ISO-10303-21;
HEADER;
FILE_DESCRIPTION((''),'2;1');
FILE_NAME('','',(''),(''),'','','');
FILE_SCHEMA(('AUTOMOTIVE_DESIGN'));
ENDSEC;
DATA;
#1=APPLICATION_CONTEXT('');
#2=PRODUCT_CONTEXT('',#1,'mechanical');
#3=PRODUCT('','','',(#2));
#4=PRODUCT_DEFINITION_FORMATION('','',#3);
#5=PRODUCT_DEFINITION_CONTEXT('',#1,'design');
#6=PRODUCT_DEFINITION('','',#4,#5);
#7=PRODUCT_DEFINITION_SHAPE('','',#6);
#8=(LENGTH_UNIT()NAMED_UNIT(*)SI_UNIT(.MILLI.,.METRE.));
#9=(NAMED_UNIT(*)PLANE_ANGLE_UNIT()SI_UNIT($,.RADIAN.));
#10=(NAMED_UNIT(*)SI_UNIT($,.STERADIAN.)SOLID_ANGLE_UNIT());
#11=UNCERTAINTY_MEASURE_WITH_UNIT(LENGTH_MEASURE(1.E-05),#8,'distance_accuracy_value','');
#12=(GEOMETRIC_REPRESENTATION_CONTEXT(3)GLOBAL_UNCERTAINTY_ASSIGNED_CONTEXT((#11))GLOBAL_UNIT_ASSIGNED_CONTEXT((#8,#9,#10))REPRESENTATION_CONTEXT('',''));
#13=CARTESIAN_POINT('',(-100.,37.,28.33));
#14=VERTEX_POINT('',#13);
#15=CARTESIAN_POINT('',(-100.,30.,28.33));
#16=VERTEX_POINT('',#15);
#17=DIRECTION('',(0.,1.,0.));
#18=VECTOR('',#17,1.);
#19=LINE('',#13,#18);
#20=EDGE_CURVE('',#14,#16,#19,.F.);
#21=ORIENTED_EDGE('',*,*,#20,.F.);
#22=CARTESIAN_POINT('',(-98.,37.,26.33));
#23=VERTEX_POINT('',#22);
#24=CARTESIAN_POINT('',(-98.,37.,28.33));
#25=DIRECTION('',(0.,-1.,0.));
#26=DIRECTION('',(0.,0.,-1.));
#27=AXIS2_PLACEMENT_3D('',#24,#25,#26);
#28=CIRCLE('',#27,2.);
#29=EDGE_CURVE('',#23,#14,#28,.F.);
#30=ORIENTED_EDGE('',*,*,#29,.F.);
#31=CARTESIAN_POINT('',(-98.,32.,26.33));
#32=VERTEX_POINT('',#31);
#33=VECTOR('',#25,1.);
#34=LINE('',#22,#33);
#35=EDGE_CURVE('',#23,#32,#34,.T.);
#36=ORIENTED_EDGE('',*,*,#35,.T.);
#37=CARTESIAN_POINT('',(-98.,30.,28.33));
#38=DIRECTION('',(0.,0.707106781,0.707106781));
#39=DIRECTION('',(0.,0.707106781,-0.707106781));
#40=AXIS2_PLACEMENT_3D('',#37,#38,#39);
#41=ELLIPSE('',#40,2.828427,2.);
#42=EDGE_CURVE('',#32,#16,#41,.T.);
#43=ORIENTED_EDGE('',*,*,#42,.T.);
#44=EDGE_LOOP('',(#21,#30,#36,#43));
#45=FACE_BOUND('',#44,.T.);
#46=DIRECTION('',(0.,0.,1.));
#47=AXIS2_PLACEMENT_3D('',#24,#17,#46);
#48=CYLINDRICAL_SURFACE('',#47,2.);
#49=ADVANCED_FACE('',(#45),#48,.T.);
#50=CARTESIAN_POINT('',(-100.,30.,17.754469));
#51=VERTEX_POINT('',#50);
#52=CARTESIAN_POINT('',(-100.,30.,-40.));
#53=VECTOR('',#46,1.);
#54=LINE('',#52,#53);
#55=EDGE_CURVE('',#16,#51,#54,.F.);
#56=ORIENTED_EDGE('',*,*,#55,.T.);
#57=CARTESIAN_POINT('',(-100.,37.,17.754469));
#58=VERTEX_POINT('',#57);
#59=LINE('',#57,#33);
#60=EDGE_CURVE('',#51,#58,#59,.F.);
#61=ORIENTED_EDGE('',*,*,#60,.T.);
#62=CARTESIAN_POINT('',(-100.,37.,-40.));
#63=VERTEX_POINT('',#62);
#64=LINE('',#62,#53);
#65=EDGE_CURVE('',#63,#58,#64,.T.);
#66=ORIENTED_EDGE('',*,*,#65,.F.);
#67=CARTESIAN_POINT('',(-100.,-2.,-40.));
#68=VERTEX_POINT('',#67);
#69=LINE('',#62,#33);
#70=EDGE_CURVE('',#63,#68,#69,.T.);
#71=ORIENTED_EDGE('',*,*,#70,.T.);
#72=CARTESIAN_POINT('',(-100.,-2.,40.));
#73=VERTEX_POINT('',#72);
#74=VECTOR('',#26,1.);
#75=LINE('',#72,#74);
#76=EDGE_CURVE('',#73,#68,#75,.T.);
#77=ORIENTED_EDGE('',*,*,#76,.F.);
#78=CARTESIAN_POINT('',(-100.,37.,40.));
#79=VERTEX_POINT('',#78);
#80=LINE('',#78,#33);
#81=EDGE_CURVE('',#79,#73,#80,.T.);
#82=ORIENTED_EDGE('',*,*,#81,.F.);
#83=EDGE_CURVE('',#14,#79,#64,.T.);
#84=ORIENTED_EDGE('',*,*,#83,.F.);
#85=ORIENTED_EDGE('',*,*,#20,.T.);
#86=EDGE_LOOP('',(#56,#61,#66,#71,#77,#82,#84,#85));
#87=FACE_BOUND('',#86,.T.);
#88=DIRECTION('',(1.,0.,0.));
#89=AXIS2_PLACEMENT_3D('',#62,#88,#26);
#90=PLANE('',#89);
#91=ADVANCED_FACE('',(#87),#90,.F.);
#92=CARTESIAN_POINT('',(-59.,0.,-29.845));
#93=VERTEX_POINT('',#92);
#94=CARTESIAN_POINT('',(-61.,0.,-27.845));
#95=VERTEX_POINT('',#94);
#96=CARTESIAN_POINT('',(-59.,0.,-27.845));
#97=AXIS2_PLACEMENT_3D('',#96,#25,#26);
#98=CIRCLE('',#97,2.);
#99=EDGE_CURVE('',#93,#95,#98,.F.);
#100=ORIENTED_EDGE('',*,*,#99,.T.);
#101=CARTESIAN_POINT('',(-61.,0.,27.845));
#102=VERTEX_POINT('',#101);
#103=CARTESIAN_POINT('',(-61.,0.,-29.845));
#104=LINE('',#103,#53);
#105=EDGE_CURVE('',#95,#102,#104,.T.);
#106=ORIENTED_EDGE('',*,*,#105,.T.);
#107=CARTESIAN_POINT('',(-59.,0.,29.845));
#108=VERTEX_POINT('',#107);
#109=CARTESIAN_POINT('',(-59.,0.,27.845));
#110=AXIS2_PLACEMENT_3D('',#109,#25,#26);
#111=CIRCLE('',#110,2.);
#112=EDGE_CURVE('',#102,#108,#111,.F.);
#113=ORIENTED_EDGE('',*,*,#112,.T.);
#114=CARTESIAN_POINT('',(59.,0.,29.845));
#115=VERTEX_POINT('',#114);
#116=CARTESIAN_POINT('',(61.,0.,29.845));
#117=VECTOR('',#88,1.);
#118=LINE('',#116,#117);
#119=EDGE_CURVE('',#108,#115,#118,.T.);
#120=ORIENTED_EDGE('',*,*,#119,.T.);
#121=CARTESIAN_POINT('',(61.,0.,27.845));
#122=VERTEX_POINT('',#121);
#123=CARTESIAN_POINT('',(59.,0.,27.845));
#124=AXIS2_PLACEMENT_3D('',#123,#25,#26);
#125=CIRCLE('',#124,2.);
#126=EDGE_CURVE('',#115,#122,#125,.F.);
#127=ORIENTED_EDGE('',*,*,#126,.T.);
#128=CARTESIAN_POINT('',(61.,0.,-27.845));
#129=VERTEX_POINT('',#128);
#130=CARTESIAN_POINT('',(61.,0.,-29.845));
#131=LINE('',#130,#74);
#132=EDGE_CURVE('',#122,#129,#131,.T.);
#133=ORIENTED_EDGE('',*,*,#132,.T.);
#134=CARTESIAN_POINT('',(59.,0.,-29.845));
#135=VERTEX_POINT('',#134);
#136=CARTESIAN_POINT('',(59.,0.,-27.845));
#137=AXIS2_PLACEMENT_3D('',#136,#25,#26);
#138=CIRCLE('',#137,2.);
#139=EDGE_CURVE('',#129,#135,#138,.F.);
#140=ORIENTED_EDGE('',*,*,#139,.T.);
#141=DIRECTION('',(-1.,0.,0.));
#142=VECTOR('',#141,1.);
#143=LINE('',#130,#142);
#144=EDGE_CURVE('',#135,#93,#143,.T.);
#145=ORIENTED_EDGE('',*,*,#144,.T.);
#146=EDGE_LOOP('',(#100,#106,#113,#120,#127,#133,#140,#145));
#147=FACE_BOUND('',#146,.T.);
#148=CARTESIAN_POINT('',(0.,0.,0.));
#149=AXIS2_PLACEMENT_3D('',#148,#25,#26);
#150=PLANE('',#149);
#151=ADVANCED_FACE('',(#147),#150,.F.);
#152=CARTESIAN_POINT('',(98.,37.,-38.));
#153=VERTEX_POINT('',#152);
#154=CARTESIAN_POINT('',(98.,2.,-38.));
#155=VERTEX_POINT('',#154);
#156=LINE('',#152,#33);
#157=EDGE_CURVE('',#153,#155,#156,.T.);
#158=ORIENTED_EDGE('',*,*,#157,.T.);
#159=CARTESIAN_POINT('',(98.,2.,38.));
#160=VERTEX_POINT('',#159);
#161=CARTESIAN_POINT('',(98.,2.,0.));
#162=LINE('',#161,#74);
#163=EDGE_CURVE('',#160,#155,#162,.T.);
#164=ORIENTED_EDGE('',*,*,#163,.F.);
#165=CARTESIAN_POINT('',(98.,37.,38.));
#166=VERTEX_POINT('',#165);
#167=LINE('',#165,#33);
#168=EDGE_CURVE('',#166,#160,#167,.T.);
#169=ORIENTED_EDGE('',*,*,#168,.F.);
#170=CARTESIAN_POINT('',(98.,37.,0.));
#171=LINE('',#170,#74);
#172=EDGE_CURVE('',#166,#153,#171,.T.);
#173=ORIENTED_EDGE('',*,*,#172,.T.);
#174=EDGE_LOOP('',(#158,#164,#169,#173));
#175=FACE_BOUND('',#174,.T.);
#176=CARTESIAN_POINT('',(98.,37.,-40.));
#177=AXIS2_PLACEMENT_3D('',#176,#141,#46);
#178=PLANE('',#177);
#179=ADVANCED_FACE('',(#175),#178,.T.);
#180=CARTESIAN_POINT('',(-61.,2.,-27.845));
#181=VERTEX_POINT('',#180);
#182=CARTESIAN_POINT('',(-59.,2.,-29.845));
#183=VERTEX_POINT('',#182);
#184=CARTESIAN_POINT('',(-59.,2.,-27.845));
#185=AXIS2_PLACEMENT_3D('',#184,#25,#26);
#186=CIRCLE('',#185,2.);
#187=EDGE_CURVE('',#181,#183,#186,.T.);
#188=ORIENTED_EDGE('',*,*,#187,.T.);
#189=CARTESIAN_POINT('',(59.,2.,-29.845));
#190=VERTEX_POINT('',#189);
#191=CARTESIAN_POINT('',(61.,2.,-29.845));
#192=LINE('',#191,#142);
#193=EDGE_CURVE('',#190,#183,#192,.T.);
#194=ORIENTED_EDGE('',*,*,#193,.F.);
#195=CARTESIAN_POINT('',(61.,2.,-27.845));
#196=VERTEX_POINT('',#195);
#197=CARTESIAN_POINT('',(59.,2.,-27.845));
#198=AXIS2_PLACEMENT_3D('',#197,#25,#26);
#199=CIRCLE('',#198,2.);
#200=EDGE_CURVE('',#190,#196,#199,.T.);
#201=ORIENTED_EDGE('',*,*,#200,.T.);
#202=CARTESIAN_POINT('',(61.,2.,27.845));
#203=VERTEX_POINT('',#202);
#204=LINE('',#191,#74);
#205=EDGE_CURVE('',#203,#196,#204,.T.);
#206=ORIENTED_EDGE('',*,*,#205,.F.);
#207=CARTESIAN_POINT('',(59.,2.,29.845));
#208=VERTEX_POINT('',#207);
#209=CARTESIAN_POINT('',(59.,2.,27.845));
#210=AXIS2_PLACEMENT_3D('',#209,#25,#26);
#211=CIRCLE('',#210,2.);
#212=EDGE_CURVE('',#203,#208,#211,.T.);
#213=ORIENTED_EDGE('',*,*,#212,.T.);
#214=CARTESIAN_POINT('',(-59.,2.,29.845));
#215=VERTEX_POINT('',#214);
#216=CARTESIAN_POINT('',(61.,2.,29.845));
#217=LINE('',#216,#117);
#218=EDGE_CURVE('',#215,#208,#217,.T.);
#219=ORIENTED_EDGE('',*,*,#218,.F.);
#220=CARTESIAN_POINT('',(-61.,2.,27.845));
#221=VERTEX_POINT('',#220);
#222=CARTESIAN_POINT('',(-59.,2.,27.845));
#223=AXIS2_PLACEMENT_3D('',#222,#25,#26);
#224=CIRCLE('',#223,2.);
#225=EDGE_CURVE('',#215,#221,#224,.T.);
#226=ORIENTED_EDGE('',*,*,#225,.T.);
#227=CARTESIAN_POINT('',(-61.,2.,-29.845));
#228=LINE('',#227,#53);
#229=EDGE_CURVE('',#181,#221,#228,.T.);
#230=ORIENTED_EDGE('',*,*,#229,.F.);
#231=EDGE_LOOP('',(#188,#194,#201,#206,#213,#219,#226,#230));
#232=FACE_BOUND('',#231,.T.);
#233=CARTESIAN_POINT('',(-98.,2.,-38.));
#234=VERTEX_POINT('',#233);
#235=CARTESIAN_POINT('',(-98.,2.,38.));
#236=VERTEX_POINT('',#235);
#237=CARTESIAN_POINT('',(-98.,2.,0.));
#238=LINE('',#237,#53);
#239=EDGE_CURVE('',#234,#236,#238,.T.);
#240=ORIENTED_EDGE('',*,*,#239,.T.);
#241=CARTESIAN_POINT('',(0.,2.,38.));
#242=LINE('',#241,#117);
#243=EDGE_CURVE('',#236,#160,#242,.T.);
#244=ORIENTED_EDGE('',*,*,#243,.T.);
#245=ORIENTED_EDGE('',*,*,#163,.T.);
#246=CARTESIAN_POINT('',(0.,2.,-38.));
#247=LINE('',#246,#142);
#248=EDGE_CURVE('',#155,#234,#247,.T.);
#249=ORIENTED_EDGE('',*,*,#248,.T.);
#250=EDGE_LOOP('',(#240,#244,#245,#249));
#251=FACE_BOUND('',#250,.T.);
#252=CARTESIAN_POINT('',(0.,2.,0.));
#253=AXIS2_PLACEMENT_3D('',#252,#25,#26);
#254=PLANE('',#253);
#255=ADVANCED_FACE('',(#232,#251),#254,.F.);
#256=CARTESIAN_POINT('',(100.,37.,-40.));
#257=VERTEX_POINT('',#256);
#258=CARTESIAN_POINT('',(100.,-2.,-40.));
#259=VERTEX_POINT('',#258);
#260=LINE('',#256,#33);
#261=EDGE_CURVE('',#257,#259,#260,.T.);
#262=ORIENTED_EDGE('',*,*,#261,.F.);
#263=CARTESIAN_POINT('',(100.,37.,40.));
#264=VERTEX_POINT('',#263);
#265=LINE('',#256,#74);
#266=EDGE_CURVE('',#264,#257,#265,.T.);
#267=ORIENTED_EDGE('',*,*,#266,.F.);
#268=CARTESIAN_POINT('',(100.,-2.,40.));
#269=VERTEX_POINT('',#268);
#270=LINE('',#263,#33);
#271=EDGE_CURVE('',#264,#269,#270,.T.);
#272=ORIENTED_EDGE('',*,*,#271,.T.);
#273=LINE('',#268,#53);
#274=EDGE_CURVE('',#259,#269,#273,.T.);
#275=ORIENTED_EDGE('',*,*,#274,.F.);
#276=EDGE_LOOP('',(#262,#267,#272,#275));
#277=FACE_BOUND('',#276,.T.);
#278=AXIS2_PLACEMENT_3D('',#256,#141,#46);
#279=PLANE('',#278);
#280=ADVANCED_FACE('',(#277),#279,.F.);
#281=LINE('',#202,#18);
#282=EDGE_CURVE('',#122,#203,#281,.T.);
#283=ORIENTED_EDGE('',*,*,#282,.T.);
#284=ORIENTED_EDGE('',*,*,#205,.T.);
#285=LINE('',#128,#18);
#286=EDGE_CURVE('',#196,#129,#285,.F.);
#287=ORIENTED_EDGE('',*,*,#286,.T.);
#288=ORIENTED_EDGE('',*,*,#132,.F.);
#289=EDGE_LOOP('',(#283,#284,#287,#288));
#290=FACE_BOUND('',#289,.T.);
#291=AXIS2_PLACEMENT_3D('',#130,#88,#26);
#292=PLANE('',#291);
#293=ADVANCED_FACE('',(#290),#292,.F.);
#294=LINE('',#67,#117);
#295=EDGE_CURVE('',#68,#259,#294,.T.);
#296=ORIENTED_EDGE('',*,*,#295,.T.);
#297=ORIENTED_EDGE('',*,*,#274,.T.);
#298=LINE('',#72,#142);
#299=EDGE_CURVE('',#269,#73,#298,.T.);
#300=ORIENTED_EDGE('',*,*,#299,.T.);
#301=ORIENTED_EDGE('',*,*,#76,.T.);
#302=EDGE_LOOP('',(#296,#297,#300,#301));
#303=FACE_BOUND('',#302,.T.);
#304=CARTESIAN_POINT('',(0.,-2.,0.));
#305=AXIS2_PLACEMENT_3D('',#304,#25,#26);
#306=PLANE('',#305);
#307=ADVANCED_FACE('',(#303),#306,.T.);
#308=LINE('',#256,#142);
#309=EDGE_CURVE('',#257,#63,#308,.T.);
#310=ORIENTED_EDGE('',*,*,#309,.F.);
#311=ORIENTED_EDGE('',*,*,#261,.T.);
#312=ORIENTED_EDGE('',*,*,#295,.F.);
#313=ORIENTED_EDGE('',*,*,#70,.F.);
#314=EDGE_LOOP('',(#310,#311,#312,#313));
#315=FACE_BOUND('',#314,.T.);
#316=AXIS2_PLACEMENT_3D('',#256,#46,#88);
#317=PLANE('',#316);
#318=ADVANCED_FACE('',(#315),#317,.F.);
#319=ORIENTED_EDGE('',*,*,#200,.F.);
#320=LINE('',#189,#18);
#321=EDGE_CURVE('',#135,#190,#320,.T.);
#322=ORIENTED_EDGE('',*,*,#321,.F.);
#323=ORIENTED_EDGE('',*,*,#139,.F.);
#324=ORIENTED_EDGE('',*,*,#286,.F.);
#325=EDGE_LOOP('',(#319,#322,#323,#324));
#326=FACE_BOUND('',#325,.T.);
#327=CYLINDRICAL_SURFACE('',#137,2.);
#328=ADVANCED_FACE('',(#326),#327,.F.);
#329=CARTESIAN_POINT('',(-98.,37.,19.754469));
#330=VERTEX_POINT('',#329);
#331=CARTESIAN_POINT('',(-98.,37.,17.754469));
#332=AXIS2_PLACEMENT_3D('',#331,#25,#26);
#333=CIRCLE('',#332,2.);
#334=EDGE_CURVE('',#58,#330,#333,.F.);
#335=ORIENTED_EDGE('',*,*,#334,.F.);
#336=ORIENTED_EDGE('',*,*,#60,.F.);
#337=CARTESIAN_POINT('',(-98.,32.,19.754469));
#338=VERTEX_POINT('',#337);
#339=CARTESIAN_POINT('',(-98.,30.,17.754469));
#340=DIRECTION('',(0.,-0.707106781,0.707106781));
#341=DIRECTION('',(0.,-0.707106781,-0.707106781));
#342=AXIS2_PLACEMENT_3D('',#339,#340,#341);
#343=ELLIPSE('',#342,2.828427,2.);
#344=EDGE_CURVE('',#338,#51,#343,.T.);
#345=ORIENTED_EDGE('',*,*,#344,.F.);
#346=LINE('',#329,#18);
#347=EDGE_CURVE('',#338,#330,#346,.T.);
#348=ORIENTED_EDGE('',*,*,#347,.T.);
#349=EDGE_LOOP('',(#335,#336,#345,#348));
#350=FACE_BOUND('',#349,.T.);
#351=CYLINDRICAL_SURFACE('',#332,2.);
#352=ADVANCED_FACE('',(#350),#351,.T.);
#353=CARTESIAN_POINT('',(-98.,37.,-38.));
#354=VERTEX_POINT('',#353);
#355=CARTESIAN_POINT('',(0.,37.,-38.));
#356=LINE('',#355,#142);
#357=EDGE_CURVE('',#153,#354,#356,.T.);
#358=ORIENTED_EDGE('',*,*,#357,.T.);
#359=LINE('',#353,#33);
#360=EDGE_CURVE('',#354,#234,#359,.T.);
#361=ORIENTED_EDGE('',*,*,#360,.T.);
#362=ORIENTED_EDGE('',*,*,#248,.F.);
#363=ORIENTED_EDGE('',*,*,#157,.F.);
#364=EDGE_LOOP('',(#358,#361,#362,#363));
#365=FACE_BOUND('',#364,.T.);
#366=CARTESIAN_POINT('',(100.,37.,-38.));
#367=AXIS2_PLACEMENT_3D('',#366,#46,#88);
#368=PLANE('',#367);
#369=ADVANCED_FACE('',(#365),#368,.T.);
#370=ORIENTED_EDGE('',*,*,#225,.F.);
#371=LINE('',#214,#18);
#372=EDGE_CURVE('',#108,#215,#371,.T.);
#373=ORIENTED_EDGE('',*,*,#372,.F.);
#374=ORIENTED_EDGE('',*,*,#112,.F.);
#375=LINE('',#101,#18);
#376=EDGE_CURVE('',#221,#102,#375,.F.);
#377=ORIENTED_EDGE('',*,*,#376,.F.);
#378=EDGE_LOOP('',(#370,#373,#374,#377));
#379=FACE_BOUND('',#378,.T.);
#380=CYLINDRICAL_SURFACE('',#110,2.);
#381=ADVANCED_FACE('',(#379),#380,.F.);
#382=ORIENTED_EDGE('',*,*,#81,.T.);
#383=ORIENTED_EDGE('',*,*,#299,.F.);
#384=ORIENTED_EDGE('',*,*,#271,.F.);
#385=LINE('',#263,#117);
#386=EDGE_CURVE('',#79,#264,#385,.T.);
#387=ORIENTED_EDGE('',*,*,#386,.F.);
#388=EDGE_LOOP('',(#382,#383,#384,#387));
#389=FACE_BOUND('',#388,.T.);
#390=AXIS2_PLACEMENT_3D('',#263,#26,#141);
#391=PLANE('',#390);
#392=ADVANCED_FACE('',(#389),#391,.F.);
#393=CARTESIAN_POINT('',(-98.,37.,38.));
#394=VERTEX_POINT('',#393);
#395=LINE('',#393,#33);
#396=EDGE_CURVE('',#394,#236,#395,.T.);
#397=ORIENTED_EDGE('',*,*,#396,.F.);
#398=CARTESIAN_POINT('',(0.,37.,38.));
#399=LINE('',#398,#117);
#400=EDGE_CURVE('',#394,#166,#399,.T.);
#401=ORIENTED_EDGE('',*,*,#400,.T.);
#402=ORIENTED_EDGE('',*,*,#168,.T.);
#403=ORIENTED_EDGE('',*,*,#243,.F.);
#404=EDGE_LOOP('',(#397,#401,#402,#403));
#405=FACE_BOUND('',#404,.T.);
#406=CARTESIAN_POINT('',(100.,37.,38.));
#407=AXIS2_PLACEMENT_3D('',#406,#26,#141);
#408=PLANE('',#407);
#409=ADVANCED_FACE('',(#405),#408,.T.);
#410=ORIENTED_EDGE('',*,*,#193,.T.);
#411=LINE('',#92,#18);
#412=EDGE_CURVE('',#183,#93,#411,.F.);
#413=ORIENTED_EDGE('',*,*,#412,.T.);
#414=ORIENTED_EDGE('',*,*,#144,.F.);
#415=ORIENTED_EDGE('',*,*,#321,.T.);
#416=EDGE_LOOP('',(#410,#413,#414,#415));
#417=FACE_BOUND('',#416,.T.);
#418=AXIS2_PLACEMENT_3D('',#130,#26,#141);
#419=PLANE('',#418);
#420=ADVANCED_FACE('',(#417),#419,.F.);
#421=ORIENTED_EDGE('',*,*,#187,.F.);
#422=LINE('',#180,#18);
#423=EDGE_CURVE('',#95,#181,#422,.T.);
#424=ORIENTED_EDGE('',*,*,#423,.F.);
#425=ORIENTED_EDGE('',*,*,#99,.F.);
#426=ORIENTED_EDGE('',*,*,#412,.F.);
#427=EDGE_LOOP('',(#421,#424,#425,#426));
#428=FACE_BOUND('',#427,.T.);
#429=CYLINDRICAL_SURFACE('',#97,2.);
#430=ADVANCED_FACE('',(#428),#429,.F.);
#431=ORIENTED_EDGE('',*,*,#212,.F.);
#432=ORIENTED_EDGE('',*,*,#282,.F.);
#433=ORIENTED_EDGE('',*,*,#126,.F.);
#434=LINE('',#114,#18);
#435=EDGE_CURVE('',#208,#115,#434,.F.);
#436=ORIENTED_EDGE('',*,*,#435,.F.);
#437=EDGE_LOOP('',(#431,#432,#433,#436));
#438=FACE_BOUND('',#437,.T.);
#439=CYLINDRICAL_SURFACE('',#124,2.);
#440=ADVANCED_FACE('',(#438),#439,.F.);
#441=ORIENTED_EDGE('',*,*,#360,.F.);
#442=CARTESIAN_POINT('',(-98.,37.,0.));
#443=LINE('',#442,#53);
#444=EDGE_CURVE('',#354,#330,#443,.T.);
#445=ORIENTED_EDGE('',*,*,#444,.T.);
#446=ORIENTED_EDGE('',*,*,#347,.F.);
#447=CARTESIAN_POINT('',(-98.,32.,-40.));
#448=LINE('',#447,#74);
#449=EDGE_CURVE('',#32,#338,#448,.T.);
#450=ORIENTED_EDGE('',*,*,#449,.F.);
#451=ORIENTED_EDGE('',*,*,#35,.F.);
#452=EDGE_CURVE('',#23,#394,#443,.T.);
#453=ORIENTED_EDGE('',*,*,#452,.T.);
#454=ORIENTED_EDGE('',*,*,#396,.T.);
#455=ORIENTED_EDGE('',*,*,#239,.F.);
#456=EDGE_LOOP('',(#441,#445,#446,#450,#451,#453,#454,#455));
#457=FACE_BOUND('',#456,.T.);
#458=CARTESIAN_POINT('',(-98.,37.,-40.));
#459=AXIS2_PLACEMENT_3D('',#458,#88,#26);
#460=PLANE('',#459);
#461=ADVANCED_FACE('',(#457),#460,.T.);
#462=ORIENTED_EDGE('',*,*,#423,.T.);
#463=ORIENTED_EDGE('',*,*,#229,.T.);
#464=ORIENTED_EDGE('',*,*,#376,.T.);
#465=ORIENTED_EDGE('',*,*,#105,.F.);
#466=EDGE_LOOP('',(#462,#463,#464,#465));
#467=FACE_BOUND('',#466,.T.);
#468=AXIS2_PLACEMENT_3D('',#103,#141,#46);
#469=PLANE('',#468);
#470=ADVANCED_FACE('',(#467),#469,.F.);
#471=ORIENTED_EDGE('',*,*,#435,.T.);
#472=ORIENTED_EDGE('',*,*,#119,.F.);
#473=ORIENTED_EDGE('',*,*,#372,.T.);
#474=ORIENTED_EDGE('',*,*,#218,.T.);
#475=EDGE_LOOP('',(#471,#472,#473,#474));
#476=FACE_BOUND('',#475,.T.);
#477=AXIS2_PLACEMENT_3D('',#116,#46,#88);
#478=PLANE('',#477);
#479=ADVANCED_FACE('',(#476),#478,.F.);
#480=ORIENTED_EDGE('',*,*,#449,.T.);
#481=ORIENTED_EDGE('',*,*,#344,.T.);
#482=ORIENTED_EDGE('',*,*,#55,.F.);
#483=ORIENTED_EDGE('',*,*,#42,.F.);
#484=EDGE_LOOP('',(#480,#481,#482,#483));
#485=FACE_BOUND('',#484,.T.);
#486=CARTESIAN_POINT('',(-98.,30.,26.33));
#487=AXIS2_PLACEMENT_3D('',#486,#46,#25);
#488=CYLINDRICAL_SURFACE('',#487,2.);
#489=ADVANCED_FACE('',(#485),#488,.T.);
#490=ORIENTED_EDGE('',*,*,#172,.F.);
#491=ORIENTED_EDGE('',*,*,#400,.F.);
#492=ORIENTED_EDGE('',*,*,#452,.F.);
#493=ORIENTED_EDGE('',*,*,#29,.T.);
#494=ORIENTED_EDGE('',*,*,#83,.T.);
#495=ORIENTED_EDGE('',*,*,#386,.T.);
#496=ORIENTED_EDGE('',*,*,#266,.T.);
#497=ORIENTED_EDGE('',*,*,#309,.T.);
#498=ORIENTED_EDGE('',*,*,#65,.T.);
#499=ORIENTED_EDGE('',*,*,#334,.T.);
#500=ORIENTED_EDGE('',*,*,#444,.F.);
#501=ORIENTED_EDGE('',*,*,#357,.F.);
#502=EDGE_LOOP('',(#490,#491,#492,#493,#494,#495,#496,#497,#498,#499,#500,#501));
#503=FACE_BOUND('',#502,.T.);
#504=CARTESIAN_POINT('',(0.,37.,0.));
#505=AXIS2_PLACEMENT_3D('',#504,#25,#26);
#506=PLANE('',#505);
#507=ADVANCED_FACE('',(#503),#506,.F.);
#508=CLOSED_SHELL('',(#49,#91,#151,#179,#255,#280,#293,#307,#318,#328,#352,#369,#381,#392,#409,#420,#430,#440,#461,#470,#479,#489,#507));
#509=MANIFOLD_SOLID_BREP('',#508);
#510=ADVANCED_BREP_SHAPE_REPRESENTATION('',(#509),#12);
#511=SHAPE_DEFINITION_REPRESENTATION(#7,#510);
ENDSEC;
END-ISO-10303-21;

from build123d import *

# Parameters (mm, degrees)
SKETCH2_W           = 200
SKETCH2_H           = 80
BOSS_EXTRUDE3_DEPTH = 37
SHELL2_T            = -2
SKETCH3_W           = 122
SKETCH3_H           = 59.69
CUT_EXTRUDE1_DEPTH  = 2
SKETCH4_W           = 200
SKETCH4_H           = 80
BOSS_EXTRUDE4_DEPTH = 2
FILLET5_R           = 2
SKETCH7_W           = 6.575531056
SKETCH7_H           = 5
CUT_EXTRUDE2_DEPTH  = 5
FILLET6_R           = 2


with BuildPart() as part:
    # Sketch2 → Boss-Extrude3 (new body)
    with BuildSketch(Plane(origin=(0, 0, 0), x_dir=(1, 0, 0), z_dir=(0, 1, 0))):
        Rectangle(SKETCH2_W, SKETCH2_H)
    extrude(amount=BOSS_EXTRUDE3_DEPTH)

    # Shell2
    shell2_openings = [part.faces().sort_by_distance(p)[0] for p in [
        (0, 37, 0),
    ]]
    offset(amount=SHELL2_T, openings=shell2_openings, kind=Kind.INTERSECTION)

    # Sketch3 → Cut-Extrude1 (cut)
    with BuildSketch(Plane(origin=(0, 2, 0), x_dir=(1, 0, 0), z_dir=(0, 1, 0))):
        Rectangle(SKETCH3_W, SKETCH3_H)
    extrude(amount=-CUT_EXTRUDE1_DEPTH, mode=Mode.SUBTRACT)

    # Sketch4 → Boss-Extrude4 (add)
    with BuildSketch(Plane.XZ):
        Rectangle(SKETCH4_W, SKETCH4_H)
    extrude(amount=BOSS_EXTRUDE4_DEPTH)

    # Fillet5
    fillet5_edges = [part.edges().sort_by_distance(p)[0] for p in [
        (-61, 1, 29.845),
        (-61, 1, -29.845),
        (61, 1, -29.845),
        (61, 1, 29.845),
    ]]
    fillet(fillet5_edges, radius=FILLET5_R)

    # Sketch7 → Cut-Extrude2 (cut)
    with BuildSketch(Plane.ZY.offset(100)):
        with Locations((23.042234472, 34.5)):
            Rectangle(SKETCH7_W, SKETCH7_H)
    extrude(amount=-CUT_EXTRUDE2_DEPTH, mode=Mode.SUBTRACT)

    # Fillet6
    fillet6_edges = [part.edges().sort_by_distance(p)[0] for p in [
        (-100, 34.5, 26.33),
        (-100, 34.5, 19.754468944),
        (-100, 32, 23.042234472),
    ]]
    fillet(fillet6_edges, radius=FILLET6_R - 0.0001)  # a hair under: the kernel refuses the full size


solid = part.part
